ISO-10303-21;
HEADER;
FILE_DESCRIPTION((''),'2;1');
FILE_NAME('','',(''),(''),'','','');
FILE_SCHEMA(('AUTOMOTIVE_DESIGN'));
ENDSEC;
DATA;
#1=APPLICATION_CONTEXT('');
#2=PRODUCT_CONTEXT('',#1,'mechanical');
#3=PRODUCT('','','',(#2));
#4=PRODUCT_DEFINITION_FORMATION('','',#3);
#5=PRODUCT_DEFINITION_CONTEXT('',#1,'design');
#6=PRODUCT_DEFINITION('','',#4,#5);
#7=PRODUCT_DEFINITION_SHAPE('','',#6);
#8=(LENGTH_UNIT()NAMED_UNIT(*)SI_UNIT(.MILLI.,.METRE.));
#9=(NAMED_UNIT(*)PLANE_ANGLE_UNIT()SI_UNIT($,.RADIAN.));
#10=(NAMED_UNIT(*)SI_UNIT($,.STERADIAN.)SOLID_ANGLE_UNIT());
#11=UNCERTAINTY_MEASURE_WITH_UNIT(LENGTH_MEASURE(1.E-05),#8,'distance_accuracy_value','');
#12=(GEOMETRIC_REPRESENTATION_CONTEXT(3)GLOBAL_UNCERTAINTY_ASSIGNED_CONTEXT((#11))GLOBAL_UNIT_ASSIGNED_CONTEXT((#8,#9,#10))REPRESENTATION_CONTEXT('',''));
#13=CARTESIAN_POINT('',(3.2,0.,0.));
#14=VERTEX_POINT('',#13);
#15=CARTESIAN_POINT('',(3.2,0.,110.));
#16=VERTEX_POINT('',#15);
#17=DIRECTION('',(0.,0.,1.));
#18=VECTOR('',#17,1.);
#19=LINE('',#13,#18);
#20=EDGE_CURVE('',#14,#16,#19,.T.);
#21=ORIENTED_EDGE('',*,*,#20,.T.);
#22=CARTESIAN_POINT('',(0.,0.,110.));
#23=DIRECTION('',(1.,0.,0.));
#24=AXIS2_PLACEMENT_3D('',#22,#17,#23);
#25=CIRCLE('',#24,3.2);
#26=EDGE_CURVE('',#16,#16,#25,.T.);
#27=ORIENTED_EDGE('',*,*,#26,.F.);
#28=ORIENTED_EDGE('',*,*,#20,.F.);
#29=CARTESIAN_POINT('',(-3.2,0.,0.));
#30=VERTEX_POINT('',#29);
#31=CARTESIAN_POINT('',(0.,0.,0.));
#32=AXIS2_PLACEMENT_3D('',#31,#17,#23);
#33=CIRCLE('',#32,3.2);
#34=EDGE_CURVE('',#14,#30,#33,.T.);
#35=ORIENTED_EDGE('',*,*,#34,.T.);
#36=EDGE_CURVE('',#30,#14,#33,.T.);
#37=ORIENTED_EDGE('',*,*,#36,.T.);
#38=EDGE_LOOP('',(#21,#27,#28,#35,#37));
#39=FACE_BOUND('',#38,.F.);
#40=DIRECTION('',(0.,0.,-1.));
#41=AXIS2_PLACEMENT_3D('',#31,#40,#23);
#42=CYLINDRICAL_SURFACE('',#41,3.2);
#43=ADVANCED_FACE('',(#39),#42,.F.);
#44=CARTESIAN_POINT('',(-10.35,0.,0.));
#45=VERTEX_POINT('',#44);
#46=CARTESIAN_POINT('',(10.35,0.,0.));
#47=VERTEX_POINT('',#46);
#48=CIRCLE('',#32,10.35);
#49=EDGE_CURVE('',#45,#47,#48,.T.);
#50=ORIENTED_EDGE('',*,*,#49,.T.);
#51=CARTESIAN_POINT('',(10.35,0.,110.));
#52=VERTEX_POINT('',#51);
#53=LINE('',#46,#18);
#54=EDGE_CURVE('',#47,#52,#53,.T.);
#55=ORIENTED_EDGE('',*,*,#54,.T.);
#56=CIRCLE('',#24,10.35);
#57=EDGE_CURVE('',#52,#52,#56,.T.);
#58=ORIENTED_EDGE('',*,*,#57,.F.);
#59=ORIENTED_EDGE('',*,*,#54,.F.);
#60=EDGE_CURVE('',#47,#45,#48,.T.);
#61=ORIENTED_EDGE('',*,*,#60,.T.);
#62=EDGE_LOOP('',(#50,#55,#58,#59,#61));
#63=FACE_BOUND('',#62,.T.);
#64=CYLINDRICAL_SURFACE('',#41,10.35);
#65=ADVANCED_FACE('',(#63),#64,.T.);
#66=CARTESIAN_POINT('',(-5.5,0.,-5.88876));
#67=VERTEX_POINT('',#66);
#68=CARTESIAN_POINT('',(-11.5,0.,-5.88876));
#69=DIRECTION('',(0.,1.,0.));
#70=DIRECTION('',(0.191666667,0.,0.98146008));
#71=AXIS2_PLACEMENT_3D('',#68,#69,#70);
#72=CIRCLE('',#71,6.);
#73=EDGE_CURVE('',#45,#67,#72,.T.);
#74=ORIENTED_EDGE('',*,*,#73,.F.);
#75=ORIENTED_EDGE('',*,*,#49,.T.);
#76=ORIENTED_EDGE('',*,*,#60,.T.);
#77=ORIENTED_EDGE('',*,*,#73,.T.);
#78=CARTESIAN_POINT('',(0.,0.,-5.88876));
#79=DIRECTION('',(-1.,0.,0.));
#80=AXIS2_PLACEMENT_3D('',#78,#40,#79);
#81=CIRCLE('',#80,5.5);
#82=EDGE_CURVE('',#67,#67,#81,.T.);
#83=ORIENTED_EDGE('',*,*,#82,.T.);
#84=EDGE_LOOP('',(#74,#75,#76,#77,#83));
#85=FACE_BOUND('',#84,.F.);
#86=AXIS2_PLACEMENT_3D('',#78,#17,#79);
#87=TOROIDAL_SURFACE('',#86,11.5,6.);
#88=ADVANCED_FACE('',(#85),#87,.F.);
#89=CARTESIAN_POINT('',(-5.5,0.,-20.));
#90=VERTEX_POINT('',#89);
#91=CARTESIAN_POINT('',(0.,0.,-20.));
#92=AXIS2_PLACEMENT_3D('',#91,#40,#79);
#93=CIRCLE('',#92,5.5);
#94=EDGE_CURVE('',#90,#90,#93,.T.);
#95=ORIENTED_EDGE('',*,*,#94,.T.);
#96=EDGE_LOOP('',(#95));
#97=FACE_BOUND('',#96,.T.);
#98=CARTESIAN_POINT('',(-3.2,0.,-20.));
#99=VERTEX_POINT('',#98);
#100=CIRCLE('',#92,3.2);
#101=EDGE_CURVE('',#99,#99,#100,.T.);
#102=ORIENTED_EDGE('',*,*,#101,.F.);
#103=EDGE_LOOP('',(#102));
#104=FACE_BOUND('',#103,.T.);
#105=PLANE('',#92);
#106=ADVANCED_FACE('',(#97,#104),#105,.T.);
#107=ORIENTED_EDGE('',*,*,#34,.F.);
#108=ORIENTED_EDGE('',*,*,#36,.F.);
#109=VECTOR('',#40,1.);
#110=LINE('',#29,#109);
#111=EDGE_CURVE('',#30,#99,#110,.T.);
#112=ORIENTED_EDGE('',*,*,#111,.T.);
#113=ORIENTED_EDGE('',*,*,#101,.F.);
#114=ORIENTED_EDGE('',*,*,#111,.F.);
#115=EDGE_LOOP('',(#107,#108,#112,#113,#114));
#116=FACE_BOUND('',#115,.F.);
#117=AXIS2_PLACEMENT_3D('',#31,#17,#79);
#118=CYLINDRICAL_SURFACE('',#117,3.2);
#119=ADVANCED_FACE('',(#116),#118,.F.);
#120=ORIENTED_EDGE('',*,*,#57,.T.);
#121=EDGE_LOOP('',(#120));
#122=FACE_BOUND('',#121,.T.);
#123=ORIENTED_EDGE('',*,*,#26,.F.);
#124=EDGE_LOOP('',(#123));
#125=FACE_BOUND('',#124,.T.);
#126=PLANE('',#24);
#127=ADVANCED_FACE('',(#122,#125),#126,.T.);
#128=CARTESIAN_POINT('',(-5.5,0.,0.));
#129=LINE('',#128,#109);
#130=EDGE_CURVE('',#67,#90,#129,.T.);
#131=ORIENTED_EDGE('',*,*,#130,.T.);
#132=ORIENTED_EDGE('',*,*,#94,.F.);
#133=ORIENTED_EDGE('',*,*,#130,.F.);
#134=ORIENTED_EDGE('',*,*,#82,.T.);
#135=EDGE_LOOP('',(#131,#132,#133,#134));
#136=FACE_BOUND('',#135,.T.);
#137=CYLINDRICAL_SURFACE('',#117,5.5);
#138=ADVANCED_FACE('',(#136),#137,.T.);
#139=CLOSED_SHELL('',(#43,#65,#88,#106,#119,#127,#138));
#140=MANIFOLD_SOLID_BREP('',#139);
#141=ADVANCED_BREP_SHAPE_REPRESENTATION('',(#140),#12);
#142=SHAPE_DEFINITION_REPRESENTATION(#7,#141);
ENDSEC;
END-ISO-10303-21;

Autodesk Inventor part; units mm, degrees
ref_plane "YZ Plane" through (0, 0, 0) normal (1, 0, 0) x (0, 1, 0)
ref_plane "XZ Plane" through (0, 0, 0) normal (0, 1, 0) x (-1, 0, 0)
ref_plane "XY Plane" through (0, 0, 0) normal (0, 0, 1) x (1, 0, 0)
sketch "スケッチ1" plane through (0, 0, 0) normal (0, 0, 1) x (1, 0, 0)
  circle A0 centre (0, 0) radius 10.35
  circle A1 centre (0, 0) radius 3.2
  dimension "d0" = 20.7
  dimension "d1" = 6.4
extrude "押し出し1" add sketch "スケッチ1" along normal blind 110
sketch "スケッチ2" plane through (0, 0, 0) normal (0, 0, -1) x (-1, 0, 0)
  circle A0 centre (0, 0) radius 3.2 projected
  circle A1 centre (0, 0) radius 5.5
  dimension "d4" = 11
extrude "押し出し2" add sketch "スケッチ2" along normal blind 20
fillet "フィレット1" radius 6 1 edges at (5.5, 0, 0)
properties part number "gpu_supporter_01"
